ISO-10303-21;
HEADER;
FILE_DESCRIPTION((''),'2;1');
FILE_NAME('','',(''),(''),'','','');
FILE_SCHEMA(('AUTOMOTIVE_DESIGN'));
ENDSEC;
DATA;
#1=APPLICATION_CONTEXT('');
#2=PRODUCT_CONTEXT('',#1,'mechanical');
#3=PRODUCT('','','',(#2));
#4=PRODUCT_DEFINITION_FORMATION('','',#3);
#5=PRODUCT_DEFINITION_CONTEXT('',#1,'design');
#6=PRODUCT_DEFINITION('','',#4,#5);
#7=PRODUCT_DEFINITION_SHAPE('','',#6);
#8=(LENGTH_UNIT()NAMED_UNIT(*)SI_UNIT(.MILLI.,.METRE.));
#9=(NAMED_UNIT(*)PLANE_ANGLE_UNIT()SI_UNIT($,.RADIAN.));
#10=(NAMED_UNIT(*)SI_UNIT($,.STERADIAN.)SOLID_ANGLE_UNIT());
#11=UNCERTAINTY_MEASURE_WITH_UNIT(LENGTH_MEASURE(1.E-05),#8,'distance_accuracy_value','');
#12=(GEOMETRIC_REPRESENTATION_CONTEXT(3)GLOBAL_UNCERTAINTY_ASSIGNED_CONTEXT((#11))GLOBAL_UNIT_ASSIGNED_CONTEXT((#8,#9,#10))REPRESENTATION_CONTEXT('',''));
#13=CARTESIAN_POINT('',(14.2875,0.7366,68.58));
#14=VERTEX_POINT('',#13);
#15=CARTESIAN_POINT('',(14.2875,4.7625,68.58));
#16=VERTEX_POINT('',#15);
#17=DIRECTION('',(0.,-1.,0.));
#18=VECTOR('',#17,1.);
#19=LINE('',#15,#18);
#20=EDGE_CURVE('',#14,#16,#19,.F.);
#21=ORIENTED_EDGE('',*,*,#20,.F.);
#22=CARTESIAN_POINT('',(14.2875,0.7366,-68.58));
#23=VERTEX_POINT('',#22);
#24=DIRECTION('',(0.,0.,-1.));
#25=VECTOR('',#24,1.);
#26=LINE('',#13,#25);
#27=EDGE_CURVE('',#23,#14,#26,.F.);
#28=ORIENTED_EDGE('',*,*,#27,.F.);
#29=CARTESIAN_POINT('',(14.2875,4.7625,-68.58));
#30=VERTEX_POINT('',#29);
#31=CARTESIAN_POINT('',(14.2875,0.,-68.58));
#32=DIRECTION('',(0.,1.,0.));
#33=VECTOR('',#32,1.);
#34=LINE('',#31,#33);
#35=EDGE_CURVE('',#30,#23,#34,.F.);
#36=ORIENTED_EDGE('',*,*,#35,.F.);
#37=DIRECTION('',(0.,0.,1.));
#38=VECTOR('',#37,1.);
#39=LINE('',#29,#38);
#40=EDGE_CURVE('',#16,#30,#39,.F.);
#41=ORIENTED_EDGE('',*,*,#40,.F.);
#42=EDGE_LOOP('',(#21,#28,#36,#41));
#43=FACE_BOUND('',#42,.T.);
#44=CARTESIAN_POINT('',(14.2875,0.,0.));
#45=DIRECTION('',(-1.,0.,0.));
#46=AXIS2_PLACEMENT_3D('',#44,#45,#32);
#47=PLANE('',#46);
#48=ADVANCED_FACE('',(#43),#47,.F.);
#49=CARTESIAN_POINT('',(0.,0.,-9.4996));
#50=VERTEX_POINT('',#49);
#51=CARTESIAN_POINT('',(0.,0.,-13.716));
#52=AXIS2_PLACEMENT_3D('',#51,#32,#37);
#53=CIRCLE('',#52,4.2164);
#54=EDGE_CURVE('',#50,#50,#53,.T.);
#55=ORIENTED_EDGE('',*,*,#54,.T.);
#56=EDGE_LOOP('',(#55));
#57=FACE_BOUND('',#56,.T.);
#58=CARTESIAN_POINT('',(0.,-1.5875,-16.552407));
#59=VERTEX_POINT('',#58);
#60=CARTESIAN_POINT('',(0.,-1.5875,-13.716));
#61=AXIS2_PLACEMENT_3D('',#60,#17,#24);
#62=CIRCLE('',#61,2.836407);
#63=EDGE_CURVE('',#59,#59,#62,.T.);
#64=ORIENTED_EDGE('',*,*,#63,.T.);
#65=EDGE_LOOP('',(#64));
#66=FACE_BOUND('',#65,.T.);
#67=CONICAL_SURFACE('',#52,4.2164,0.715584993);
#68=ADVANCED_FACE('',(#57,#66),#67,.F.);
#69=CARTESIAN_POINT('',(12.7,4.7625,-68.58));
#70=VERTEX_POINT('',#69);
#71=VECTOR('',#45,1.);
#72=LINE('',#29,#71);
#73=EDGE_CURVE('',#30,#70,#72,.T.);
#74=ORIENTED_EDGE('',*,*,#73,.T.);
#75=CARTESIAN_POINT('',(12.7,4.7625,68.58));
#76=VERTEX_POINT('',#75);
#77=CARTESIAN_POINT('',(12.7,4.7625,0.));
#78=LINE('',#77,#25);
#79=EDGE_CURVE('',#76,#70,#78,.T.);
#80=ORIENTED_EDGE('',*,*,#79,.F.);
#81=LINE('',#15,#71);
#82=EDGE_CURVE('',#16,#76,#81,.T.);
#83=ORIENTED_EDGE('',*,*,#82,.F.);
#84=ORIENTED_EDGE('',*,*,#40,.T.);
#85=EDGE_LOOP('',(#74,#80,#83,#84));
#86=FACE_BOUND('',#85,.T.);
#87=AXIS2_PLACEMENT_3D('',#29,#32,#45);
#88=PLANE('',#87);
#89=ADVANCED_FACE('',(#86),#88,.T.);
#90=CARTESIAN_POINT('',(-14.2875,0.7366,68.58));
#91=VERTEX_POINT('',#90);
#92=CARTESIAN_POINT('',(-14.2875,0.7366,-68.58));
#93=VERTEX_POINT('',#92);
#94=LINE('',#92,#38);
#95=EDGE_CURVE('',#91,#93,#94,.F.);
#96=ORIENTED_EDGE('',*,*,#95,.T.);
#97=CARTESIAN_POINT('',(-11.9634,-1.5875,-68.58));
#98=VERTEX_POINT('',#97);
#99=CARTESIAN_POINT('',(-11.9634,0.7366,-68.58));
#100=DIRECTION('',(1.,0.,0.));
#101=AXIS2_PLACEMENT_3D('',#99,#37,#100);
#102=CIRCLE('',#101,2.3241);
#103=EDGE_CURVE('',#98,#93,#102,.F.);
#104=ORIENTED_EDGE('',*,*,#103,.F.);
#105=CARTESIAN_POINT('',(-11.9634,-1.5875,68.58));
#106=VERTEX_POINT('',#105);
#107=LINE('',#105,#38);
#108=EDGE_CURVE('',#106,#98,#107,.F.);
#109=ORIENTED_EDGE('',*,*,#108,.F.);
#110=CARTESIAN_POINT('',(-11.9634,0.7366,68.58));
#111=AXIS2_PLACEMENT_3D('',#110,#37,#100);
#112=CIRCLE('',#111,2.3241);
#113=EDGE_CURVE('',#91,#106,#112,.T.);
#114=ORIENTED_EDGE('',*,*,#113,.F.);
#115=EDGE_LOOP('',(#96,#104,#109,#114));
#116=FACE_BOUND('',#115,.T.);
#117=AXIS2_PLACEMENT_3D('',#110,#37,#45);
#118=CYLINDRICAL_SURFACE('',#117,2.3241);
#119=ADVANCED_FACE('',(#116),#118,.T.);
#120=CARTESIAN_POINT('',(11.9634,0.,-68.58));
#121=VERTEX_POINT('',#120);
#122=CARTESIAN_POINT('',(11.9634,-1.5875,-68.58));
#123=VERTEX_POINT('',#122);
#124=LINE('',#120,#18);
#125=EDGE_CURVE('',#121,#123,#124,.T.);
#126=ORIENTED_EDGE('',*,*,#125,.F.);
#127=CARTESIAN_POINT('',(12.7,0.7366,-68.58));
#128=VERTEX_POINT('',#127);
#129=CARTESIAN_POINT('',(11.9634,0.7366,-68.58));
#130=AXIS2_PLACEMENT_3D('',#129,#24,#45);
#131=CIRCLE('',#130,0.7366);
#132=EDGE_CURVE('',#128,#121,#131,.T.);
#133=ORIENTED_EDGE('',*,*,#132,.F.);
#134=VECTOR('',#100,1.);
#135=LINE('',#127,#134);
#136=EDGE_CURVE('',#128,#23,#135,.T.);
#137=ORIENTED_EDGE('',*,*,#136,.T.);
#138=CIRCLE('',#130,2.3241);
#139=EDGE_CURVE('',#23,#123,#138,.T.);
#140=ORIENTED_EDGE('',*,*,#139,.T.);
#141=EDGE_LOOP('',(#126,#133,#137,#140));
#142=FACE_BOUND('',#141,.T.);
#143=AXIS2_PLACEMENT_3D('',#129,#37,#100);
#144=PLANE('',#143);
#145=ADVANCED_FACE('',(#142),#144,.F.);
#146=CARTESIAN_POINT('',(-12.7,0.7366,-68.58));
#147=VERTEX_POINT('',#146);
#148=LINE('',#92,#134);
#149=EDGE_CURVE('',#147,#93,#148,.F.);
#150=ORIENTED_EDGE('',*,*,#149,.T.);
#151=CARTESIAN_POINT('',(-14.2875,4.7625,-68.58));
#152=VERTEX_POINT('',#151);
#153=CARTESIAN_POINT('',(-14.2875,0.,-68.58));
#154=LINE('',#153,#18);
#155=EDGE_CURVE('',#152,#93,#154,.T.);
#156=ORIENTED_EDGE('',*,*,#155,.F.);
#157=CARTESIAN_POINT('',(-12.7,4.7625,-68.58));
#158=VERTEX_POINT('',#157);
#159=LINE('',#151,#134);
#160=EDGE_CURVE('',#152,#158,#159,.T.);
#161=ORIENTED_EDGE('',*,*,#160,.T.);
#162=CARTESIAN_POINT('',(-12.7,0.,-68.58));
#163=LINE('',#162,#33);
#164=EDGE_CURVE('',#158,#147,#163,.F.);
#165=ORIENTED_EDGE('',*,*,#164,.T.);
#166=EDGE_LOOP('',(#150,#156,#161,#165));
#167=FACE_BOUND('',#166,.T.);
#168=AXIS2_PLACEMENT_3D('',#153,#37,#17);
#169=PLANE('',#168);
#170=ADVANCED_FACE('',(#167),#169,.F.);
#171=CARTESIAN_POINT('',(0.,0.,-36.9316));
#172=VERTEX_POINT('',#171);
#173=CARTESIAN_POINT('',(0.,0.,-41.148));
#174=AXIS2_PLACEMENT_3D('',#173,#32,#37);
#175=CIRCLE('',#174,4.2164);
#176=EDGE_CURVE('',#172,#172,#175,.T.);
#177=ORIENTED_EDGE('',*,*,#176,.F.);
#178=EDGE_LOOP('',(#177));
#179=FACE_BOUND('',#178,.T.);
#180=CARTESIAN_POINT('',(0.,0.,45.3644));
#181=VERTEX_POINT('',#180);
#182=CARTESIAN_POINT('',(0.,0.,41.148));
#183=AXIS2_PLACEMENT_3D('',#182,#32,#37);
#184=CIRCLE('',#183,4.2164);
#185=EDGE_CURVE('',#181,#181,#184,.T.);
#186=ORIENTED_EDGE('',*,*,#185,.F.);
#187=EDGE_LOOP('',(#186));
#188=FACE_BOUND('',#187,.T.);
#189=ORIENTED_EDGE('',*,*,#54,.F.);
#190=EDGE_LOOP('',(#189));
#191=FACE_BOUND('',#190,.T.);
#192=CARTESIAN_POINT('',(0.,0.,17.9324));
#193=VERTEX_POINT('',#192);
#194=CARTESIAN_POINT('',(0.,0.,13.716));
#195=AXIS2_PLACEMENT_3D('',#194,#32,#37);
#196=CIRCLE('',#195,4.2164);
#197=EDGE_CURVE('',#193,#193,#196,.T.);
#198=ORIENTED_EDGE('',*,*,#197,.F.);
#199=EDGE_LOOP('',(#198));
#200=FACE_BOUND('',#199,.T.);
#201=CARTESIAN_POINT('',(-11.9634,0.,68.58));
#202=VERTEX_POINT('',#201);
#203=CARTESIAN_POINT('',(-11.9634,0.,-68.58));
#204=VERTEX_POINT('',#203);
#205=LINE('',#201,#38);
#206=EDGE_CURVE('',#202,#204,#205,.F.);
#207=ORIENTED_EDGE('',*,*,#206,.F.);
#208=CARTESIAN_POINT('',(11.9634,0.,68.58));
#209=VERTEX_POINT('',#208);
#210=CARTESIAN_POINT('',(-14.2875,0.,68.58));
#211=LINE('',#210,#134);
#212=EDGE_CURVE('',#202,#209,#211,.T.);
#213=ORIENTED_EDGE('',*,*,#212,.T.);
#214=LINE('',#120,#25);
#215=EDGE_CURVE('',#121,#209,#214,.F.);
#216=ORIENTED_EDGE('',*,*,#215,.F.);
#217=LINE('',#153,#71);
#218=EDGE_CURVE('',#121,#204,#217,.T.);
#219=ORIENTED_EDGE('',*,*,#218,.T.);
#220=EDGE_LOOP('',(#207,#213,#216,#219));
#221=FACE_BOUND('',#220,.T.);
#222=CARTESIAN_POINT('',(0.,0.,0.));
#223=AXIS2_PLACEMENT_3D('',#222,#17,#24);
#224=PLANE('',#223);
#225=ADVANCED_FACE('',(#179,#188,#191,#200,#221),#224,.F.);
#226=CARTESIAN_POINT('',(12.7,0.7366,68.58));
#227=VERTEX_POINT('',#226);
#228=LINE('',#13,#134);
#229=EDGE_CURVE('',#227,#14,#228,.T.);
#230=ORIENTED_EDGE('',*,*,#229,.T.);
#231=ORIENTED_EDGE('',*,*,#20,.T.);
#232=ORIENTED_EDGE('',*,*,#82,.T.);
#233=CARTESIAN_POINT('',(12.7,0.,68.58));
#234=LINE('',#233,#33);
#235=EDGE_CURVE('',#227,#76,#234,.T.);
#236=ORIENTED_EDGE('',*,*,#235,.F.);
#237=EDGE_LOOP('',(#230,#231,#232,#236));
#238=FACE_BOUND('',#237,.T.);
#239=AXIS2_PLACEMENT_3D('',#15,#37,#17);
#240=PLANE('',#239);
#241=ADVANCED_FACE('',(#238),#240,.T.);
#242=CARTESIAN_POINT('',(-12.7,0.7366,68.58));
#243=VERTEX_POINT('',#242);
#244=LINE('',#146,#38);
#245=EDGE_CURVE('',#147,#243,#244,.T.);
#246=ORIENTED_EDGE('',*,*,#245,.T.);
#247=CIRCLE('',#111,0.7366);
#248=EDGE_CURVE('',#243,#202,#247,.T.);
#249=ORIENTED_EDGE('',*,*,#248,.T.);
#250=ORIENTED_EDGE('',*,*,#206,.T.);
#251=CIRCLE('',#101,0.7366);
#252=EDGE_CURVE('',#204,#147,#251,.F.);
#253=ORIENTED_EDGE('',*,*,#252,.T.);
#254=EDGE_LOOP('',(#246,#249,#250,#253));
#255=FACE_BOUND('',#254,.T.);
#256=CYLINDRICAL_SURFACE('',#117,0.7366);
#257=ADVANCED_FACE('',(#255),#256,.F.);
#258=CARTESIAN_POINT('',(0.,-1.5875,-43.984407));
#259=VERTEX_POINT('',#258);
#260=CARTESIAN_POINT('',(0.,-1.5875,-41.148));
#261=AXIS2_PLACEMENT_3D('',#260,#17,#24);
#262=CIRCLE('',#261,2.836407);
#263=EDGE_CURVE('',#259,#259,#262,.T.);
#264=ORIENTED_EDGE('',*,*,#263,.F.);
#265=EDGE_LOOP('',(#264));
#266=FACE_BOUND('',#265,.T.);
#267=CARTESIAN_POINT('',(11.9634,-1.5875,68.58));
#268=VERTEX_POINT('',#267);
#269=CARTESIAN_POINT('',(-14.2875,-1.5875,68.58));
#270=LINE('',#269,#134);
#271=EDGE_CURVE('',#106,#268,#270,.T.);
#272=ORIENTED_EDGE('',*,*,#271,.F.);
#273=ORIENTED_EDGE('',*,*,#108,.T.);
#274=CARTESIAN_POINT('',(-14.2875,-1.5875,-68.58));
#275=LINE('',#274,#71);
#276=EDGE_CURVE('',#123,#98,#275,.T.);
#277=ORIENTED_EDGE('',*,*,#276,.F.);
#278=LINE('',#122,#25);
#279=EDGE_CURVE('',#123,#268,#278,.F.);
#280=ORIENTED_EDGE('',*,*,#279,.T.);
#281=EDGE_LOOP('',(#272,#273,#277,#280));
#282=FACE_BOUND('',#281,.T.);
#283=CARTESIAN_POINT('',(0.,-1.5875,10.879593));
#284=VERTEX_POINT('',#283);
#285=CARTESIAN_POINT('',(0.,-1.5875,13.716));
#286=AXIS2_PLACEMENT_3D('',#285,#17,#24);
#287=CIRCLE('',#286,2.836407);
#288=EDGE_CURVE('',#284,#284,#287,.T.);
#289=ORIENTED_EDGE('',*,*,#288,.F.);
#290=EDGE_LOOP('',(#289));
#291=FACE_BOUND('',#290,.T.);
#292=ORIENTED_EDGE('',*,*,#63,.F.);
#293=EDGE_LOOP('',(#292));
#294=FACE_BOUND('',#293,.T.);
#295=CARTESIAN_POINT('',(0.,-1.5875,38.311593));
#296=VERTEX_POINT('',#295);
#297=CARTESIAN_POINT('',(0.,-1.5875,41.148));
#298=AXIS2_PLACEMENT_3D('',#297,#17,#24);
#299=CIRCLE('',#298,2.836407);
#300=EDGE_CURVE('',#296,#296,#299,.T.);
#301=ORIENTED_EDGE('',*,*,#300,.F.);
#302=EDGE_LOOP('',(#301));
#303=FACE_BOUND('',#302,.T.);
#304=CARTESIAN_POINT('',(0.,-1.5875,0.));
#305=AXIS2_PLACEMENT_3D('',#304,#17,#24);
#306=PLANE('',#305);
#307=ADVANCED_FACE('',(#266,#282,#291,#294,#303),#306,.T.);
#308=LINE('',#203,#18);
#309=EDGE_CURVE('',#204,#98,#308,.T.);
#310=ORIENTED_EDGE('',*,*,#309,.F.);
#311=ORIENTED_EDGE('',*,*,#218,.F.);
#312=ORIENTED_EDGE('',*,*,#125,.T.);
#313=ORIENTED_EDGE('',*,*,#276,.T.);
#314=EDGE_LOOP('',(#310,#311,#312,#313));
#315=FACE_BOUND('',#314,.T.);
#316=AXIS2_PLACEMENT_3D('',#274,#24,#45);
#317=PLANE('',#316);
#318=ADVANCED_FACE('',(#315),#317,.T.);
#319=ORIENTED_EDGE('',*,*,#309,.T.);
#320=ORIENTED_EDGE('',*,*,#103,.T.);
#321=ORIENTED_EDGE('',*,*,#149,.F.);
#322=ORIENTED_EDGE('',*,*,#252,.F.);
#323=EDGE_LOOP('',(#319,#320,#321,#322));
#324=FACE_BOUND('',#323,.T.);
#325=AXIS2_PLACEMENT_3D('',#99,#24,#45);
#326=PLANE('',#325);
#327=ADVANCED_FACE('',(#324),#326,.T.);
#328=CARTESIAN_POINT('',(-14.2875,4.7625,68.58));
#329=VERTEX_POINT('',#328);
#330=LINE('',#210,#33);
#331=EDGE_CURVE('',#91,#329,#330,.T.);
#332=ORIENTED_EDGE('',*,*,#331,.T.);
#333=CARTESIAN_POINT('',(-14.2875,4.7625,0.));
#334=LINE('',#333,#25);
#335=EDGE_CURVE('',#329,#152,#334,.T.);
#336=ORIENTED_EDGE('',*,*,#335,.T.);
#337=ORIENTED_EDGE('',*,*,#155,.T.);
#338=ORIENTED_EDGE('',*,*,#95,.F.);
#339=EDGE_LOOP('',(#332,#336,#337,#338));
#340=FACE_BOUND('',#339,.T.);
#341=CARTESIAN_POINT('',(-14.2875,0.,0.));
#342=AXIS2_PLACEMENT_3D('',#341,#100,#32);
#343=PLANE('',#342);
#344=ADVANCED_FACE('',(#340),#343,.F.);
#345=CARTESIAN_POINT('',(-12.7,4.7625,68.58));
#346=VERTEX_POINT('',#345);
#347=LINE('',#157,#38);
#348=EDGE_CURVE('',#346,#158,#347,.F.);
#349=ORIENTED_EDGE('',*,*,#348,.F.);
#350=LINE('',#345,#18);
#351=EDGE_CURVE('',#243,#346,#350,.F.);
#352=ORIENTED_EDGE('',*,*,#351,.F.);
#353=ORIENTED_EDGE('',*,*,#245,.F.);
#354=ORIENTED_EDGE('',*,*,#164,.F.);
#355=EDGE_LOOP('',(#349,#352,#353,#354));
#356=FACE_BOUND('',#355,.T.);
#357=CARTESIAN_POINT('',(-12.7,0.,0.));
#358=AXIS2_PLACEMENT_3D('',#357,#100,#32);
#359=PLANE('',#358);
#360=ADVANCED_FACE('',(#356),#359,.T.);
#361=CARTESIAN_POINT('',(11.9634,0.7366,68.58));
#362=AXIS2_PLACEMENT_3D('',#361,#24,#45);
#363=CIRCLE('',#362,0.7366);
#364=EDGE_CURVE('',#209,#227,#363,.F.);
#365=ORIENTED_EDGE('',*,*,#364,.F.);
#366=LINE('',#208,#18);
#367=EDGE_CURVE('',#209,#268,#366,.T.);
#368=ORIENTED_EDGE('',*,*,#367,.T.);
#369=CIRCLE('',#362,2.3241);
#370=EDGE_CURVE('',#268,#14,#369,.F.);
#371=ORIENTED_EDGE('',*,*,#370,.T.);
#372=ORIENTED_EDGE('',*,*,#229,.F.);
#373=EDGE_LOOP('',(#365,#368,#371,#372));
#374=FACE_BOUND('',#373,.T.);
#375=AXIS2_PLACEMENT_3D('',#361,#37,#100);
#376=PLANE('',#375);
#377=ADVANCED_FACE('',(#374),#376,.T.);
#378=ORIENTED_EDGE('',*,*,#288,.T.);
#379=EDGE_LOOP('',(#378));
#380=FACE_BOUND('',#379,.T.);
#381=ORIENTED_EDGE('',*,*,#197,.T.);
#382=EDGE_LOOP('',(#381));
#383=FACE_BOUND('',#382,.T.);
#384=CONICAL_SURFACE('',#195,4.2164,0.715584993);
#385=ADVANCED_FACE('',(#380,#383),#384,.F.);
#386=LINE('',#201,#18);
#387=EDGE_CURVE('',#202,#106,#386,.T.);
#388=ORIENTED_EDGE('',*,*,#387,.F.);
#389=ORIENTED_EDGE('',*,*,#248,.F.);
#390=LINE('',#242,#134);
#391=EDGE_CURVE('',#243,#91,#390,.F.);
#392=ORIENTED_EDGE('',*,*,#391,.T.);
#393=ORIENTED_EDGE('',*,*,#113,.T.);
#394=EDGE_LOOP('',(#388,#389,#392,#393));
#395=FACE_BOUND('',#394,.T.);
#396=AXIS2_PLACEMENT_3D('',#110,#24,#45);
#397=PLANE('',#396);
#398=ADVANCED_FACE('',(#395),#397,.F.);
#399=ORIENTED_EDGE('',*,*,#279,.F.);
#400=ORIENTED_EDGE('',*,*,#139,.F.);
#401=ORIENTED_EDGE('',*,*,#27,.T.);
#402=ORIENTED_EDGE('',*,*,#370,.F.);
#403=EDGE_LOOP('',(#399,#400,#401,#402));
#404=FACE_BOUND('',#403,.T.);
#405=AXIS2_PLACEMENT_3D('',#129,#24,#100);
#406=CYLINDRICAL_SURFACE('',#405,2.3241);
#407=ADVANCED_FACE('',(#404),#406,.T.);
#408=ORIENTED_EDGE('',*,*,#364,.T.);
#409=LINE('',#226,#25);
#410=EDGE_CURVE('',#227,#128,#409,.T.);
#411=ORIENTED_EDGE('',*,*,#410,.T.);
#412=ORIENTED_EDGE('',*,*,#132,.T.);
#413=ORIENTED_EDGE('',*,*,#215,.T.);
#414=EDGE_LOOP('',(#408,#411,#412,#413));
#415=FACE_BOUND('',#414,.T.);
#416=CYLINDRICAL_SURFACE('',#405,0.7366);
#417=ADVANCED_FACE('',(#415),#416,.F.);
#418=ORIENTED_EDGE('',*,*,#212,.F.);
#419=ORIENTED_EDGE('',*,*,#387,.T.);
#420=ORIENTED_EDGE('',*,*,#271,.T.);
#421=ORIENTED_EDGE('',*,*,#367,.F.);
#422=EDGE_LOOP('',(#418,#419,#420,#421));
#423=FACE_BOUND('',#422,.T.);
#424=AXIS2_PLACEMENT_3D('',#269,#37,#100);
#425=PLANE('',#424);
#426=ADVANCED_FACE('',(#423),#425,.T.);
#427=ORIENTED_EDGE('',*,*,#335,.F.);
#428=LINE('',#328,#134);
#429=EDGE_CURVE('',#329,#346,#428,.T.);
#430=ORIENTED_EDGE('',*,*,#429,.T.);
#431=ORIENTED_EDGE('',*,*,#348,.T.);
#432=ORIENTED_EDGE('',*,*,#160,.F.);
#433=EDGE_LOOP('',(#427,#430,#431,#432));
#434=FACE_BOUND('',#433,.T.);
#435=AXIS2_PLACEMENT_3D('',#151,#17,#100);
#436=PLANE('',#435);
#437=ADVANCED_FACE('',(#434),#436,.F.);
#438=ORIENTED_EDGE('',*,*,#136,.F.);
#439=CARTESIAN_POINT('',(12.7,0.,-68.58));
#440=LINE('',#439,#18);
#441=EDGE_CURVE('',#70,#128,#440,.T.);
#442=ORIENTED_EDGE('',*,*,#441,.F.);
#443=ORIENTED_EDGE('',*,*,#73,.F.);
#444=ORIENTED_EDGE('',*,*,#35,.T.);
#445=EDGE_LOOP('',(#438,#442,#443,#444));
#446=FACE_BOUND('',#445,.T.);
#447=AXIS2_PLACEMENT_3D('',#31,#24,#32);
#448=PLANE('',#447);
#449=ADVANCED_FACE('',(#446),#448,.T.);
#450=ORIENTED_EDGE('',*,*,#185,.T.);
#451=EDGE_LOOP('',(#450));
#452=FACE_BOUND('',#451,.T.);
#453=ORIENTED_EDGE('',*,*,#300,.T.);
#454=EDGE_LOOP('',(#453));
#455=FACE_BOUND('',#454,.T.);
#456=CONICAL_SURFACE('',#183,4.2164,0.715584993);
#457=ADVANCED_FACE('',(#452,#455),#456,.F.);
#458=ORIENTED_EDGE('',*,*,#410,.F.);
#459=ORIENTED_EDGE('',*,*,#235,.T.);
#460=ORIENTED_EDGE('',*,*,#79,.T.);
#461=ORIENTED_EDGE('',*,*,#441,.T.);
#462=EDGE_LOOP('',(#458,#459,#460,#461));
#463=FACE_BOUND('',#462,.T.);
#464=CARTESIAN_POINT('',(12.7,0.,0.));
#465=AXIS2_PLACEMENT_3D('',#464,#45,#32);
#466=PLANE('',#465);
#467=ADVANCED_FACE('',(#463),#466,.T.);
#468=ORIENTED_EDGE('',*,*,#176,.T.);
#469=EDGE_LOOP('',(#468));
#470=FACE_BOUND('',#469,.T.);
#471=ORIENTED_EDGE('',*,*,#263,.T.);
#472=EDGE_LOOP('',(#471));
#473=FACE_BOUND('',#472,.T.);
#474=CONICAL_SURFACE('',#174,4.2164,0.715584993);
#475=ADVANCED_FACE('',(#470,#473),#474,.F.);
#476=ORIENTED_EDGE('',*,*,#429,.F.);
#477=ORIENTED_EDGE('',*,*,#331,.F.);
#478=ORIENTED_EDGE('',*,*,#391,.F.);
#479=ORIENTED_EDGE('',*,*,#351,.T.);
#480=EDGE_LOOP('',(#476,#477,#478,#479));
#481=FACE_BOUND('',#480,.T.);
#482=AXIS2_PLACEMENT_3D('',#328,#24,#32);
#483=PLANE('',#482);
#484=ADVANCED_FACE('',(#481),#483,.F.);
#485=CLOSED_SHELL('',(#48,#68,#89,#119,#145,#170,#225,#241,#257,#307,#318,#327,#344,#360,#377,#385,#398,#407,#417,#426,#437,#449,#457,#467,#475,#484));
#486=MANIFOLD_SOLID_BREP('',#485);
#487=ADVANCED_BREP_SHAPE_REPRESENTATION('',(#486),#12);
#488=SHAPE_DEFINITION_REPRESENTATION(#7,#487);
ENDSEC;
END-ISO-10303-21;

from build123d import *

# Parameters (mm, degrees)
SKETCH1_W                                     = 28.575
SKETCH1_H                                     = 137.16
BASE_FLANGE1_DEPTH                            = 1.5875
EDGE_FLANGE1_STRIP_W                          = 7.8232
EDGE_FLANGE1_STRIP_H                          = 1.5875
EDGE_FLANGE1_STRIP_CUT_DEPTH                  = 137.16
EDGE_FLANGE1_DEPTH                            = 137.16
CSK_FOR_8_FLAT_HEAD_MACHINE_SCREW1_AT_2_COUNT = 2
CSK_FOR_8_FLAT_HEAD_MACHINE_SCREW1_AT_2_PITCH = 27.432
CSK_FOR_8_FLAT_HEAD_MACHINE_SCREW1_AT_3_COUNT = 2
CSK_FOR_8_FLAT_HEAD_MACHINE_SCREW1_AT_3_PITCH = 54.864
CSK_FOR_8_FLAT_HEAD_MACHINE_SCREW1_AT_4_COUNT = 2
CSK_FOR_8_FLAT_HEAD_MACHINE_SCREW1_AT_4_PITCH = 82.296


# Sheet-metal steps are written as plain solids
with BuildPart() as part:
    # Sketch1 → Base-Flange1 (new body)
    with BuildSketch(Plane(origin=(0, 0, 0), x_dir=(1, 0, 0), z_dir=(0, 1, 0))):
        Rectangle(SKETCH1_W, SKETCH1_H)
    extrude(amount=-BASE_FLANGE1_DEPTH)

    # Edge-Flange1 strip (across the edge) → Edge-Flange1 strip cut (cut)
    with BuildSketch(Plane(origin=(-14.2875, 0, -68.58), x_dir=(1, 0, 0), z_dir=(0, 0, 1))):
        with Locations((-1.5875, -0.79375)):
            Rectangle(EDGE_FLANGE1_STRIP_W, EDGE_FLANGE1_STRIP_H)
    edge_flange1_strip_cut = extrude(amount=EDGE_FLANGE1_STRIP_CUT_DEPTH, mode=Mode.SUBTRACT)

    # Edge-Flange1 section (across the edge) → Edge-Flange1 (add)
    with BuildSketch(Plane(origin=(-14.2875, 0, -68.58), x_dir=(1, 0, 0), z_dir=(0, 0, 1))):
        with BuildLine():
            Line((0, 0.7366), (0, 4.7625))
            Line((0, 4.7625), (1.5875, 4.7625))
            Line((1.5875, 4.7625), (1.5875, 0.7366))
            ThreePointArc((1.5875, 0.7366), (1.803245145, 0.215745145), (2.3241, 0))
            Line((2.3241, 0), (2.3241, -1.5875))
            ThreePointArc((2.3241, -1.5875), (0.68071313, -0.90678687), (0, 0.7366))
        make_face()
    edge_flange1 = extrude(amount=EDGE_FLANGE1_DEPTH)

    # Mirror1: Edge-Flange1 strip cut, Edge-Flange1 across plane
    add(edge_flange1_strip_cut.mirror(Plane(origin=(0, 0, 0), x_dir=(0, 0, 1), z_dir=(1, 0, 0))), mode=Mode.SUBTRACT)
    add(edge_flange1.mirror(Plane(origin=(0, 0, 0), x_dir=(0, 0, 1), z_dir=(1, 0, 0))))

    # Sketch11 → CSK for #8 Flat Head Machine Screw1 (revolve, cut)
    with BuildSketch(Plane(origin=(0, 0, 41.148), x_dir=(0, 0, 1), z_dir=(1, 0, 0))):
        Polygon((0, 0), (0, 1.5875), (2.2479, 1.5875), (2.2479, 2.26450021), (4.2164, 0), align=None)
    csk_for_8_flat_head_machine_screw1 = revolve(axis=Axis((0, 6.35, 41.148), (0, -1, 0)), mode=Mode.SUBTRACT)

    # CSK for #8 Flat Head Machine Screw1 at 2: CSK for #8 Flat Head Machine Screw1 ×2
    with Locations(*[(0, 0, -i * CSK_FOR_8_FLAT_HEAD_MACHINE_SCREW1_AT_2_PITCH) for i in range(1, CSK_FOR_8_FLAT_HEAD_MACHINE_SCREW1_AT_2_COUNT)]):
        add(csk_for_8_flat_head_machine_screw1, mode=Mode.SUBTRACT)

    # CSK for #8 Flat Head Machine Screw1 at 3: CSK for #8 Flat Head Machine Screw1 ×2
    with Locations(*[(0, 0, -i * CSK_FOR_8_FLAT_HEAD_MACHINE_SCREW1_AT_3_PITCH) for i in range(1, CSK_FOR_8_FLAT_HEAD_MACHINE_SCREW1_AT_3_COUNT)]):
        add(csk_for_8_flat_head_machine_screw1, mode=Mode.SUBTRACT)

    # CSK for #8 Flat Head Machine Screw1 at 4: CSK for #8 Flat Head Machine Screw1 ×2
    with Locations(*[(0, 0, -i * CSK_FOR_8_FLAT_HEAD_MACHINE_SCREW1_AT_4_PITCH) for i in range(1, CSK_FOR_8_FLAT_HEAD_MACHINE_SCREW1_AT_4_COUNT)]):
        add(csk_for_8_flat_head_machine_screw1, mode=Mode.SUBTRACT)


solid = part.part
